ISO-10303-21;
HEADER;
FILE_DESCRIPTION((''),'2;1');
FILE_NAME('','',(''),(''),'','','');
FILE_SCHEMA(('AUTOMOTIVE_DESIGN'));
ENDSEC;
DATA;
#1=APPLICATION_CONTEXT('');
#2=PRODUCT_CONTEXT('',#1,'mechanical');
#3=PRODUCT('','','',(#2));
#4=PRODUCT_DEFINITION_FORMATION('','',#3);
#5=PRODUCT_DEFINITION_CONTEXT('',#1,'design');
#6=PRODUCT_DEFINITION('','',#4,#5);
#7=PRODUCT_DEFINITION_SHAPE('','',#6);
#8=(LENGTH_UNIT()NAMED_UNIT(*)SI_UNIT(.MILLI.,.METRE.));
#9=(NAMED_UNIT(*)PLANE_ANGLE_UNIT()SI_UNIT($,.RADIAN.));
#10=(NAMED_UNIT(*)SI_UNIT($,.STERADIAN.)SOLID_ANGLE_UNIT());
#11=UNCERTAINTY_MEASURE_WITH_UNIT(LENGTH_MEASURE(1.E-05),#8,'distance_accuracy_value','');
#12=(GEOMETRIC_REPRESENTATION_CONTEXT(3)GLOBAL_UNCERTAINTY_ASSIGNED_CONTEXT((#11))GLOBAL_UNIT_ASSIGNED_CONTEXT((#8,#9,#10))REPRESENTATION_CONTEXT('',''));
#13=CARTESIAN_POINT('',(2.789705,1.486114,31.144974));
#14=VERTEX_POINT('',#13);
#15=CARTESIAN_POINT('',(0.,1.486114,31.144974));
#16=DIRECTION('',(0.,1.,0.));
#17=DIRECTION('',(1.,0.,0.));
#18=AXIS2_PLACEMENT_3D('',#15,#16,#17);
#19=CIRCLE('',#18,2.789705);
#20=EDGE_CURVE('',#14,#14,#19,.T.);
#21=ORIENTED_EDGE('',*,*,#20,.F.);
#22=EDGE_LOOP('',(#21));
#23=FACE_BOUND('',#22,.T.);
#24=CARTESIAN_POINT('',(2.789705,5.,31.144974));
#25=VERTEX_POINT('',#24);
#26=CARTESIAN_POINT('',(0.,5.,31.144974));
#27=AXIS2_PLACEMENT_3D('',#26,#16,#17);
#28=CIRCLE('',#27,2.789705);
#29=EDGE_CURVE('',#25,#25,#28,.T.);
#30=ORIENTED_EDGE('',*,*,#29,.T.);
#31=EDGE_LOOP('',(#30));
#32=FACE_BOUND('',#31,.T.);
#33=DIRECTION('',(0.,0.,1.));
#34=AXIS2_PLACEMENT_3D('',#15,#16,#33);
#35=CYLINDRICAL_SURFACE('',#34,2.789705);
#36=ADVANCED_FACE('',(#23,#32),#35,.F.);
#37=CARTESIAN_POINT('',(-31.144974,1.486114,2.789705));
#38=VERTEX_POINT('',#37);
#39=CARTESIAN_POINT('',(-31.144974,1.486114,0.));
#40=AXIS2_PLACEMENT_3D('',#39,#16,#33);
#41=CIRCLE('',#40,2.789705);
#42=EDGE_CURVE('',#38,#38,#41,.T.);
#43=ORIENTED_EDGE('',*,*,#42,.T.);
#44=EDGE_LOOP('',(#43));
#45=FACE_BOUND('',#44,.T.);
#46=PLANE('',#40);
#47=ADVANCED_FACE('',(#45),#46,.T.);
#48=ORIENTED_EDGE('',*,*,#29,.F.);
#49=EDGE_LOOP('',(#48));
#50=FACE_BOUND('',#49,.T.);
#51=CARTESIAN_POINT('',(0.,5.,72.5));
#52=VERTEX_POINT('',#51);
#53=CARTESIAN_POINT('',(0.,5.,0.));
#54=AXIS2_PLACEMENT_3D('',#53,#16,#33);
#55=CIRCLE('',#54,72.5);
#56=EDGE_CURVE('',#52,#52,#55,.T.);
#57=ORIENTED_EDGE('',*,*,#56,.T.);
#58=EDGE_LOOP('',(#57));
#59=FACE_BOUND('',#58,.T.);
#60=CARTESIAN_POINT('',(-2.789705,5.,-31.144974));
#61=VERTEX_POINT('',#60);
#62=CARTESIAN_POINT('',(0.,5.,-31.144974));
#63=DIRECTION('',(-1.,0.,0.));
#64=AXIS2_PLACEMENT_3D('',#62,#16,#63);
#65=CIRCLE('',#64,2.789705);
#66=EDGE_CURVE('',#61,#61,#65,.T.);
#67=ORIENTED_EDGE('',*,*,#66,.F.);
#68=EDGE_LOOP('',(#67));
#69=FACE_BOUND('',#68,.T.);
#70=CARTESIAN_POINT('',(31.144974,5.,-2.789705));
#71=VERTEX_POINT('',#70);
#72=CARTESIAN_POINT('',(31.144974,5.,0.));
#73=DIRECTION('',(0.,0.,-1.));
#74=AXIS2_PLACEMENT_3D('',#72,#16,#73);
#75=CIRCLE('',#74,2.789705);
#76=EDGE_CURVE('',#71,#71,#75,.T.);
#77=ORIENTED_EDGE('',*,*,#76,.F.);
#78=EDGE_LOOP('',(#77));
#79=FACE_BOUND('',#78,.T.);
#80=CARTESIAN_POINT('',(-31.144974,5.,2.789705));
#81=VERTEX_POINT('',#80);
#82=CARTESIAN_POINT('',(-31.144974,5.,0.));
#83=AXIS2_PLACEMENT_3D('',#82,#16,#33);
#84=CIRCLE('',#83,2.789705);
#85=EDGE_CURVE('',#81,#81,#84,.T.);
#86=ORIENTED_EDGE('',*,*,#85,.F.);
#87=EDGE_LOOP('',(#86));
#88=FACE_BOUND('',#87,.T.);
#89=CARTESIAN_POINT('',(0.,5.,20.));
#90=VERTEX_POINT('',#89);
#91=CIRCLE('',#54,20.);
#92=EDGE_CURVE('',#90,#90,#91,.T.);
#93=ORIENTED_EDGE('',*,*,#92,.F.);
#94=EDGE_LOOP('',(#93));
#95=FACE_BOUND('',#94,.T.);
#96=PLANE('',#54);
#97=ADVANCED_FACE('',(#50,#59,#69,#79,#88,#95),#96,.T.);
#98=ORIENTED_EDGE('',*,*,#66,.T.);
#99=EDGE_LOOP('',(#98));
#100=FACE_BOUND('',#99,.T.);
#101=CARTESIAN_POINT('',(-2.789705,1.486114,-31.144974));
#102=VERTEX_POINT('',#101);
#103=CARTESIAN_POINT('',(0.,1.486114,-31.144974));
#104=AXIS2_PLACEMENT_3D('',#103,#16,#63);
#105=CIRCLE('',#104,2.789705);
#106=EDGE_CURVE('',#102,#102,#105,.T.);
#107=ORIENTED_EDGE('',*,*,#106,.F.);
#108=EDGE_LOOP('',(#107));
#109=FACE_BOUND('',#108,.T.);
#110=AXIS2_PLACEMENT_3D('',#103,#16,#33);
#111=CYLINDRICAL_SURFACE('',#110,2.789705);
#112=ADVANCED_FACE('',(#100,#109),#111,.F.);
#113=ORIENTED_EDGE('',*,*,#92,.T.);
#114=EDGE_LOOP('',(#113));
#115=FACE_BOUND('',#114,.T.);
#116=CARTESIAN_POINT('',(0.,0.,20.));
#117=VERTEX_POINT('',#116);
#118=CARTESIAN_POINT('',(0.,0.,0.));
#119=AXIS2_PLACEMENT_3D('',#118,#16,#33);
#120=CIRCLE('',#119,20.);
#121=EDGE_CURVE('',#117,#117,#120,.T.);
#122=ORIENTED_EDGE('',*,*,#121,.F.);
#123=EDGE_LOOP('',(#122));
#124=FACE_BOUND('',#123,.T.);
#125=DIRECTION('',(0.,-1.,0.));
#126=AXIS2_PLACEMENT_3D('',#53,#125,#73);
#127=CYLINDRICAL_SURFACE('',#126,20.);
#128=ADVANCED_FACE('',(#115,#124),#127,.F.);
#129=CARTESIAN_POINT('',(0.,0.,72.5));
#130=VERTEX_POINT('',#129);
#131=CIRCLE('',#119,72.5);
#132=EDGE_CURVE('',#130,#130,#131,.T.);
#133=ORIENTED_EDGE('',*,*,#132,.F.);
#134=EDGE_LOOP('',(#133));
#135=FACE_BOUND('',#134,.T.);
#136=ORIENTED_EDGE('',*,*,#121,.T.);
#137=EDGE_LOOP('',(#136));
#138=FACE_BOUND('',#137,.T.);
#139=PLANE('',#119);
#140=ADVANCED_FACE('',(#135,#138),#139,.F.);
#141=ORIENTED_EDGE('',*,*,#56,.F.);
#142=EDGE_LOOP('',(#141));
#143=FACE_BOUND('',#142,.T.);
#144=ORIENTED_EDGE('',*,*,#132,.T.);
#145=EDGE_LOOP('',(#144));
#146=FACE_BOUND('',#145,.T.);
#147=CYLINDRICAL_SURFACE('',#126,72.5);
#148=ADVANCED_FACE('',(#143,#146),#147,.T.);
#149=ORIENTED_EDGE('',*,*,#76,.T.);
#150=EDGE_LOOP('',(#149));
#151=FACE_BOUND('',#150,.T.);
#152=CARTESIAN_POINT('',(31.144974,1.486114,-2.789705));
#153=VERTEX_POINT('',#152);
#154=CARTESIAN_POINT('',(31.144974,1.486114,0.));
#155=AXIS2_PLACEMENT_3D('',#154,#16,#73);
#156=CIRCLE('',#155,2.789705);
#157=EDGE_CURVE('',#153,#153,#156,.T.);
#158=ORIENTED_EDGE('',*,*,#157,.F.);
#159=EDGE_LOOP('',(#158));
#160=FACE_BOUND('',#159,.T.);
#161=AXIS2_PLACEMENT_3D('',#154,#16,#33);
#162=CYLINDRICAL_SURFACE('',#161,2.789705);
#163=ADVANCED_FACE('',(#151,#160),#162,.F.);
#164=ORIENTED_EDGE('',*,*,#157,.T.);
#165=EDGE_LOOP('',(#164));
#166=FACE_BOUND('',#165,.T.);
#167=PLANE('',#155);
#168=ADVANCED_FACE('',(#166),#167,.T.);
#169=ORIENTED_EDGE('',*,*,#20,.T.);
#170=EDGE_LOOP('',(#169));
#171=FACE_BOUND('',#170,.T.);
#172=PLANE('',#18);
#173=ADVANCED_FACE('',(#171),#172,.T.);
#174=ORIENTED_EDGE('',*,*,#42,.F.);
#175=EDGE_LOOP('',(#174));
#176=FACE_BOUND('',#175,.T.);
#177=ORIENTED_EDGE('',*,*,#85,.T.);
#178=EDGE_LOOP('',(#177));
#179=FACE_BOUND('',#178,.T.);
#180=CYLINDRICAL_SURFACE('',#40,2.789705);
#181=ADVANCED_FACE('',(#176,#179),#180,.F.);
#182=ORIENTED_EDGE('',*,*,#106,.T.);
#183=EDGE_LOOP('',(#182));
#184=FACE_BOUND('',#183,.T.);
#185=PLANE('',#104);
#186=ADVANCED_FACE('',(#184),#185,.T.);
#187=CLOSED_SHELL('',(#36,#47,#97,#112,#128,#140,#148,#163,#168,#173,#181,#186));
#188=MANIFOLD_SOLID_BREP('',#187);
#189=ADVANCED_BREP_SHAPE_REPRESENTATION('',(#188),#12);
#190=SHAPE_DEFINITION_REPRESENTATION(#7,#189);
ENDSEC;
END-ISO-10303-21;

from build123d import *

# Parameters (mm, degrees)
SKETCH1_R           = 72.5
BOSS_EXTRUDE1_DEPTH = 5
SKETCH2_R           = 20
CUT_EXTRUDE1_DEPTH  = 103.652325838
SKETCH3_R           = 2.789705446
CUT_EXTRUDE2_DEPTH  = 3.513886262
CIRPATTERN1_COUNT   = 4


with BuildPart() as part:
    # Sketch1 → Boss-Extrude1 (new body)
    with BuildSketch(Plane(origin=(0, 0, 0), x_dir=(1, 0, 0), z_dir=(0, 1, 0))):
        Circle(SKETCH1_R)
    extrude(amount=BOSS_EXTRUDE1_DEPTH)

    # Sketch2 → Cut-Extrude1 (cut, through all)
    with BuildSketch(Plane(origin=(0, 0, 0), x_dir=(1, 0, 0), z_dir=(0, 1, 0))):
        Circle(SKETCH2_R)
    extrude(amount=CUT_EXTRUDE1_DEPTH, mode=Mode.SUBTRACT)

    # Sketch3 → Cut-Extrude2 (cut)
    with BuildSketch(Plane(origin=(0, 5, 0), x_dir=(1, 0, 0), z_dir=(0, 1, 0))):
        with Locations((-31.14497376, 0)):
            Circle(SKETCH3_R)
    cut_extrude2 = extrude(amount=-CUT_EXTRUDE2_DEPTH, mode=Mode.SUBTRACT)

    # CirPattern1: Cut-Extrude2 ×4 about axis
    cirpattern1_axis = Axis((0, 0, 0), (0, 1, 0))
    for i in range(1, CIRPATTERN1_COUNT):
        add(cut_extrude2.rotate(cirpattern1_axis, i * 360 / CIRPATTERN1_COUNT), mode=Mode.SUBTRACT)


solid = part.part
